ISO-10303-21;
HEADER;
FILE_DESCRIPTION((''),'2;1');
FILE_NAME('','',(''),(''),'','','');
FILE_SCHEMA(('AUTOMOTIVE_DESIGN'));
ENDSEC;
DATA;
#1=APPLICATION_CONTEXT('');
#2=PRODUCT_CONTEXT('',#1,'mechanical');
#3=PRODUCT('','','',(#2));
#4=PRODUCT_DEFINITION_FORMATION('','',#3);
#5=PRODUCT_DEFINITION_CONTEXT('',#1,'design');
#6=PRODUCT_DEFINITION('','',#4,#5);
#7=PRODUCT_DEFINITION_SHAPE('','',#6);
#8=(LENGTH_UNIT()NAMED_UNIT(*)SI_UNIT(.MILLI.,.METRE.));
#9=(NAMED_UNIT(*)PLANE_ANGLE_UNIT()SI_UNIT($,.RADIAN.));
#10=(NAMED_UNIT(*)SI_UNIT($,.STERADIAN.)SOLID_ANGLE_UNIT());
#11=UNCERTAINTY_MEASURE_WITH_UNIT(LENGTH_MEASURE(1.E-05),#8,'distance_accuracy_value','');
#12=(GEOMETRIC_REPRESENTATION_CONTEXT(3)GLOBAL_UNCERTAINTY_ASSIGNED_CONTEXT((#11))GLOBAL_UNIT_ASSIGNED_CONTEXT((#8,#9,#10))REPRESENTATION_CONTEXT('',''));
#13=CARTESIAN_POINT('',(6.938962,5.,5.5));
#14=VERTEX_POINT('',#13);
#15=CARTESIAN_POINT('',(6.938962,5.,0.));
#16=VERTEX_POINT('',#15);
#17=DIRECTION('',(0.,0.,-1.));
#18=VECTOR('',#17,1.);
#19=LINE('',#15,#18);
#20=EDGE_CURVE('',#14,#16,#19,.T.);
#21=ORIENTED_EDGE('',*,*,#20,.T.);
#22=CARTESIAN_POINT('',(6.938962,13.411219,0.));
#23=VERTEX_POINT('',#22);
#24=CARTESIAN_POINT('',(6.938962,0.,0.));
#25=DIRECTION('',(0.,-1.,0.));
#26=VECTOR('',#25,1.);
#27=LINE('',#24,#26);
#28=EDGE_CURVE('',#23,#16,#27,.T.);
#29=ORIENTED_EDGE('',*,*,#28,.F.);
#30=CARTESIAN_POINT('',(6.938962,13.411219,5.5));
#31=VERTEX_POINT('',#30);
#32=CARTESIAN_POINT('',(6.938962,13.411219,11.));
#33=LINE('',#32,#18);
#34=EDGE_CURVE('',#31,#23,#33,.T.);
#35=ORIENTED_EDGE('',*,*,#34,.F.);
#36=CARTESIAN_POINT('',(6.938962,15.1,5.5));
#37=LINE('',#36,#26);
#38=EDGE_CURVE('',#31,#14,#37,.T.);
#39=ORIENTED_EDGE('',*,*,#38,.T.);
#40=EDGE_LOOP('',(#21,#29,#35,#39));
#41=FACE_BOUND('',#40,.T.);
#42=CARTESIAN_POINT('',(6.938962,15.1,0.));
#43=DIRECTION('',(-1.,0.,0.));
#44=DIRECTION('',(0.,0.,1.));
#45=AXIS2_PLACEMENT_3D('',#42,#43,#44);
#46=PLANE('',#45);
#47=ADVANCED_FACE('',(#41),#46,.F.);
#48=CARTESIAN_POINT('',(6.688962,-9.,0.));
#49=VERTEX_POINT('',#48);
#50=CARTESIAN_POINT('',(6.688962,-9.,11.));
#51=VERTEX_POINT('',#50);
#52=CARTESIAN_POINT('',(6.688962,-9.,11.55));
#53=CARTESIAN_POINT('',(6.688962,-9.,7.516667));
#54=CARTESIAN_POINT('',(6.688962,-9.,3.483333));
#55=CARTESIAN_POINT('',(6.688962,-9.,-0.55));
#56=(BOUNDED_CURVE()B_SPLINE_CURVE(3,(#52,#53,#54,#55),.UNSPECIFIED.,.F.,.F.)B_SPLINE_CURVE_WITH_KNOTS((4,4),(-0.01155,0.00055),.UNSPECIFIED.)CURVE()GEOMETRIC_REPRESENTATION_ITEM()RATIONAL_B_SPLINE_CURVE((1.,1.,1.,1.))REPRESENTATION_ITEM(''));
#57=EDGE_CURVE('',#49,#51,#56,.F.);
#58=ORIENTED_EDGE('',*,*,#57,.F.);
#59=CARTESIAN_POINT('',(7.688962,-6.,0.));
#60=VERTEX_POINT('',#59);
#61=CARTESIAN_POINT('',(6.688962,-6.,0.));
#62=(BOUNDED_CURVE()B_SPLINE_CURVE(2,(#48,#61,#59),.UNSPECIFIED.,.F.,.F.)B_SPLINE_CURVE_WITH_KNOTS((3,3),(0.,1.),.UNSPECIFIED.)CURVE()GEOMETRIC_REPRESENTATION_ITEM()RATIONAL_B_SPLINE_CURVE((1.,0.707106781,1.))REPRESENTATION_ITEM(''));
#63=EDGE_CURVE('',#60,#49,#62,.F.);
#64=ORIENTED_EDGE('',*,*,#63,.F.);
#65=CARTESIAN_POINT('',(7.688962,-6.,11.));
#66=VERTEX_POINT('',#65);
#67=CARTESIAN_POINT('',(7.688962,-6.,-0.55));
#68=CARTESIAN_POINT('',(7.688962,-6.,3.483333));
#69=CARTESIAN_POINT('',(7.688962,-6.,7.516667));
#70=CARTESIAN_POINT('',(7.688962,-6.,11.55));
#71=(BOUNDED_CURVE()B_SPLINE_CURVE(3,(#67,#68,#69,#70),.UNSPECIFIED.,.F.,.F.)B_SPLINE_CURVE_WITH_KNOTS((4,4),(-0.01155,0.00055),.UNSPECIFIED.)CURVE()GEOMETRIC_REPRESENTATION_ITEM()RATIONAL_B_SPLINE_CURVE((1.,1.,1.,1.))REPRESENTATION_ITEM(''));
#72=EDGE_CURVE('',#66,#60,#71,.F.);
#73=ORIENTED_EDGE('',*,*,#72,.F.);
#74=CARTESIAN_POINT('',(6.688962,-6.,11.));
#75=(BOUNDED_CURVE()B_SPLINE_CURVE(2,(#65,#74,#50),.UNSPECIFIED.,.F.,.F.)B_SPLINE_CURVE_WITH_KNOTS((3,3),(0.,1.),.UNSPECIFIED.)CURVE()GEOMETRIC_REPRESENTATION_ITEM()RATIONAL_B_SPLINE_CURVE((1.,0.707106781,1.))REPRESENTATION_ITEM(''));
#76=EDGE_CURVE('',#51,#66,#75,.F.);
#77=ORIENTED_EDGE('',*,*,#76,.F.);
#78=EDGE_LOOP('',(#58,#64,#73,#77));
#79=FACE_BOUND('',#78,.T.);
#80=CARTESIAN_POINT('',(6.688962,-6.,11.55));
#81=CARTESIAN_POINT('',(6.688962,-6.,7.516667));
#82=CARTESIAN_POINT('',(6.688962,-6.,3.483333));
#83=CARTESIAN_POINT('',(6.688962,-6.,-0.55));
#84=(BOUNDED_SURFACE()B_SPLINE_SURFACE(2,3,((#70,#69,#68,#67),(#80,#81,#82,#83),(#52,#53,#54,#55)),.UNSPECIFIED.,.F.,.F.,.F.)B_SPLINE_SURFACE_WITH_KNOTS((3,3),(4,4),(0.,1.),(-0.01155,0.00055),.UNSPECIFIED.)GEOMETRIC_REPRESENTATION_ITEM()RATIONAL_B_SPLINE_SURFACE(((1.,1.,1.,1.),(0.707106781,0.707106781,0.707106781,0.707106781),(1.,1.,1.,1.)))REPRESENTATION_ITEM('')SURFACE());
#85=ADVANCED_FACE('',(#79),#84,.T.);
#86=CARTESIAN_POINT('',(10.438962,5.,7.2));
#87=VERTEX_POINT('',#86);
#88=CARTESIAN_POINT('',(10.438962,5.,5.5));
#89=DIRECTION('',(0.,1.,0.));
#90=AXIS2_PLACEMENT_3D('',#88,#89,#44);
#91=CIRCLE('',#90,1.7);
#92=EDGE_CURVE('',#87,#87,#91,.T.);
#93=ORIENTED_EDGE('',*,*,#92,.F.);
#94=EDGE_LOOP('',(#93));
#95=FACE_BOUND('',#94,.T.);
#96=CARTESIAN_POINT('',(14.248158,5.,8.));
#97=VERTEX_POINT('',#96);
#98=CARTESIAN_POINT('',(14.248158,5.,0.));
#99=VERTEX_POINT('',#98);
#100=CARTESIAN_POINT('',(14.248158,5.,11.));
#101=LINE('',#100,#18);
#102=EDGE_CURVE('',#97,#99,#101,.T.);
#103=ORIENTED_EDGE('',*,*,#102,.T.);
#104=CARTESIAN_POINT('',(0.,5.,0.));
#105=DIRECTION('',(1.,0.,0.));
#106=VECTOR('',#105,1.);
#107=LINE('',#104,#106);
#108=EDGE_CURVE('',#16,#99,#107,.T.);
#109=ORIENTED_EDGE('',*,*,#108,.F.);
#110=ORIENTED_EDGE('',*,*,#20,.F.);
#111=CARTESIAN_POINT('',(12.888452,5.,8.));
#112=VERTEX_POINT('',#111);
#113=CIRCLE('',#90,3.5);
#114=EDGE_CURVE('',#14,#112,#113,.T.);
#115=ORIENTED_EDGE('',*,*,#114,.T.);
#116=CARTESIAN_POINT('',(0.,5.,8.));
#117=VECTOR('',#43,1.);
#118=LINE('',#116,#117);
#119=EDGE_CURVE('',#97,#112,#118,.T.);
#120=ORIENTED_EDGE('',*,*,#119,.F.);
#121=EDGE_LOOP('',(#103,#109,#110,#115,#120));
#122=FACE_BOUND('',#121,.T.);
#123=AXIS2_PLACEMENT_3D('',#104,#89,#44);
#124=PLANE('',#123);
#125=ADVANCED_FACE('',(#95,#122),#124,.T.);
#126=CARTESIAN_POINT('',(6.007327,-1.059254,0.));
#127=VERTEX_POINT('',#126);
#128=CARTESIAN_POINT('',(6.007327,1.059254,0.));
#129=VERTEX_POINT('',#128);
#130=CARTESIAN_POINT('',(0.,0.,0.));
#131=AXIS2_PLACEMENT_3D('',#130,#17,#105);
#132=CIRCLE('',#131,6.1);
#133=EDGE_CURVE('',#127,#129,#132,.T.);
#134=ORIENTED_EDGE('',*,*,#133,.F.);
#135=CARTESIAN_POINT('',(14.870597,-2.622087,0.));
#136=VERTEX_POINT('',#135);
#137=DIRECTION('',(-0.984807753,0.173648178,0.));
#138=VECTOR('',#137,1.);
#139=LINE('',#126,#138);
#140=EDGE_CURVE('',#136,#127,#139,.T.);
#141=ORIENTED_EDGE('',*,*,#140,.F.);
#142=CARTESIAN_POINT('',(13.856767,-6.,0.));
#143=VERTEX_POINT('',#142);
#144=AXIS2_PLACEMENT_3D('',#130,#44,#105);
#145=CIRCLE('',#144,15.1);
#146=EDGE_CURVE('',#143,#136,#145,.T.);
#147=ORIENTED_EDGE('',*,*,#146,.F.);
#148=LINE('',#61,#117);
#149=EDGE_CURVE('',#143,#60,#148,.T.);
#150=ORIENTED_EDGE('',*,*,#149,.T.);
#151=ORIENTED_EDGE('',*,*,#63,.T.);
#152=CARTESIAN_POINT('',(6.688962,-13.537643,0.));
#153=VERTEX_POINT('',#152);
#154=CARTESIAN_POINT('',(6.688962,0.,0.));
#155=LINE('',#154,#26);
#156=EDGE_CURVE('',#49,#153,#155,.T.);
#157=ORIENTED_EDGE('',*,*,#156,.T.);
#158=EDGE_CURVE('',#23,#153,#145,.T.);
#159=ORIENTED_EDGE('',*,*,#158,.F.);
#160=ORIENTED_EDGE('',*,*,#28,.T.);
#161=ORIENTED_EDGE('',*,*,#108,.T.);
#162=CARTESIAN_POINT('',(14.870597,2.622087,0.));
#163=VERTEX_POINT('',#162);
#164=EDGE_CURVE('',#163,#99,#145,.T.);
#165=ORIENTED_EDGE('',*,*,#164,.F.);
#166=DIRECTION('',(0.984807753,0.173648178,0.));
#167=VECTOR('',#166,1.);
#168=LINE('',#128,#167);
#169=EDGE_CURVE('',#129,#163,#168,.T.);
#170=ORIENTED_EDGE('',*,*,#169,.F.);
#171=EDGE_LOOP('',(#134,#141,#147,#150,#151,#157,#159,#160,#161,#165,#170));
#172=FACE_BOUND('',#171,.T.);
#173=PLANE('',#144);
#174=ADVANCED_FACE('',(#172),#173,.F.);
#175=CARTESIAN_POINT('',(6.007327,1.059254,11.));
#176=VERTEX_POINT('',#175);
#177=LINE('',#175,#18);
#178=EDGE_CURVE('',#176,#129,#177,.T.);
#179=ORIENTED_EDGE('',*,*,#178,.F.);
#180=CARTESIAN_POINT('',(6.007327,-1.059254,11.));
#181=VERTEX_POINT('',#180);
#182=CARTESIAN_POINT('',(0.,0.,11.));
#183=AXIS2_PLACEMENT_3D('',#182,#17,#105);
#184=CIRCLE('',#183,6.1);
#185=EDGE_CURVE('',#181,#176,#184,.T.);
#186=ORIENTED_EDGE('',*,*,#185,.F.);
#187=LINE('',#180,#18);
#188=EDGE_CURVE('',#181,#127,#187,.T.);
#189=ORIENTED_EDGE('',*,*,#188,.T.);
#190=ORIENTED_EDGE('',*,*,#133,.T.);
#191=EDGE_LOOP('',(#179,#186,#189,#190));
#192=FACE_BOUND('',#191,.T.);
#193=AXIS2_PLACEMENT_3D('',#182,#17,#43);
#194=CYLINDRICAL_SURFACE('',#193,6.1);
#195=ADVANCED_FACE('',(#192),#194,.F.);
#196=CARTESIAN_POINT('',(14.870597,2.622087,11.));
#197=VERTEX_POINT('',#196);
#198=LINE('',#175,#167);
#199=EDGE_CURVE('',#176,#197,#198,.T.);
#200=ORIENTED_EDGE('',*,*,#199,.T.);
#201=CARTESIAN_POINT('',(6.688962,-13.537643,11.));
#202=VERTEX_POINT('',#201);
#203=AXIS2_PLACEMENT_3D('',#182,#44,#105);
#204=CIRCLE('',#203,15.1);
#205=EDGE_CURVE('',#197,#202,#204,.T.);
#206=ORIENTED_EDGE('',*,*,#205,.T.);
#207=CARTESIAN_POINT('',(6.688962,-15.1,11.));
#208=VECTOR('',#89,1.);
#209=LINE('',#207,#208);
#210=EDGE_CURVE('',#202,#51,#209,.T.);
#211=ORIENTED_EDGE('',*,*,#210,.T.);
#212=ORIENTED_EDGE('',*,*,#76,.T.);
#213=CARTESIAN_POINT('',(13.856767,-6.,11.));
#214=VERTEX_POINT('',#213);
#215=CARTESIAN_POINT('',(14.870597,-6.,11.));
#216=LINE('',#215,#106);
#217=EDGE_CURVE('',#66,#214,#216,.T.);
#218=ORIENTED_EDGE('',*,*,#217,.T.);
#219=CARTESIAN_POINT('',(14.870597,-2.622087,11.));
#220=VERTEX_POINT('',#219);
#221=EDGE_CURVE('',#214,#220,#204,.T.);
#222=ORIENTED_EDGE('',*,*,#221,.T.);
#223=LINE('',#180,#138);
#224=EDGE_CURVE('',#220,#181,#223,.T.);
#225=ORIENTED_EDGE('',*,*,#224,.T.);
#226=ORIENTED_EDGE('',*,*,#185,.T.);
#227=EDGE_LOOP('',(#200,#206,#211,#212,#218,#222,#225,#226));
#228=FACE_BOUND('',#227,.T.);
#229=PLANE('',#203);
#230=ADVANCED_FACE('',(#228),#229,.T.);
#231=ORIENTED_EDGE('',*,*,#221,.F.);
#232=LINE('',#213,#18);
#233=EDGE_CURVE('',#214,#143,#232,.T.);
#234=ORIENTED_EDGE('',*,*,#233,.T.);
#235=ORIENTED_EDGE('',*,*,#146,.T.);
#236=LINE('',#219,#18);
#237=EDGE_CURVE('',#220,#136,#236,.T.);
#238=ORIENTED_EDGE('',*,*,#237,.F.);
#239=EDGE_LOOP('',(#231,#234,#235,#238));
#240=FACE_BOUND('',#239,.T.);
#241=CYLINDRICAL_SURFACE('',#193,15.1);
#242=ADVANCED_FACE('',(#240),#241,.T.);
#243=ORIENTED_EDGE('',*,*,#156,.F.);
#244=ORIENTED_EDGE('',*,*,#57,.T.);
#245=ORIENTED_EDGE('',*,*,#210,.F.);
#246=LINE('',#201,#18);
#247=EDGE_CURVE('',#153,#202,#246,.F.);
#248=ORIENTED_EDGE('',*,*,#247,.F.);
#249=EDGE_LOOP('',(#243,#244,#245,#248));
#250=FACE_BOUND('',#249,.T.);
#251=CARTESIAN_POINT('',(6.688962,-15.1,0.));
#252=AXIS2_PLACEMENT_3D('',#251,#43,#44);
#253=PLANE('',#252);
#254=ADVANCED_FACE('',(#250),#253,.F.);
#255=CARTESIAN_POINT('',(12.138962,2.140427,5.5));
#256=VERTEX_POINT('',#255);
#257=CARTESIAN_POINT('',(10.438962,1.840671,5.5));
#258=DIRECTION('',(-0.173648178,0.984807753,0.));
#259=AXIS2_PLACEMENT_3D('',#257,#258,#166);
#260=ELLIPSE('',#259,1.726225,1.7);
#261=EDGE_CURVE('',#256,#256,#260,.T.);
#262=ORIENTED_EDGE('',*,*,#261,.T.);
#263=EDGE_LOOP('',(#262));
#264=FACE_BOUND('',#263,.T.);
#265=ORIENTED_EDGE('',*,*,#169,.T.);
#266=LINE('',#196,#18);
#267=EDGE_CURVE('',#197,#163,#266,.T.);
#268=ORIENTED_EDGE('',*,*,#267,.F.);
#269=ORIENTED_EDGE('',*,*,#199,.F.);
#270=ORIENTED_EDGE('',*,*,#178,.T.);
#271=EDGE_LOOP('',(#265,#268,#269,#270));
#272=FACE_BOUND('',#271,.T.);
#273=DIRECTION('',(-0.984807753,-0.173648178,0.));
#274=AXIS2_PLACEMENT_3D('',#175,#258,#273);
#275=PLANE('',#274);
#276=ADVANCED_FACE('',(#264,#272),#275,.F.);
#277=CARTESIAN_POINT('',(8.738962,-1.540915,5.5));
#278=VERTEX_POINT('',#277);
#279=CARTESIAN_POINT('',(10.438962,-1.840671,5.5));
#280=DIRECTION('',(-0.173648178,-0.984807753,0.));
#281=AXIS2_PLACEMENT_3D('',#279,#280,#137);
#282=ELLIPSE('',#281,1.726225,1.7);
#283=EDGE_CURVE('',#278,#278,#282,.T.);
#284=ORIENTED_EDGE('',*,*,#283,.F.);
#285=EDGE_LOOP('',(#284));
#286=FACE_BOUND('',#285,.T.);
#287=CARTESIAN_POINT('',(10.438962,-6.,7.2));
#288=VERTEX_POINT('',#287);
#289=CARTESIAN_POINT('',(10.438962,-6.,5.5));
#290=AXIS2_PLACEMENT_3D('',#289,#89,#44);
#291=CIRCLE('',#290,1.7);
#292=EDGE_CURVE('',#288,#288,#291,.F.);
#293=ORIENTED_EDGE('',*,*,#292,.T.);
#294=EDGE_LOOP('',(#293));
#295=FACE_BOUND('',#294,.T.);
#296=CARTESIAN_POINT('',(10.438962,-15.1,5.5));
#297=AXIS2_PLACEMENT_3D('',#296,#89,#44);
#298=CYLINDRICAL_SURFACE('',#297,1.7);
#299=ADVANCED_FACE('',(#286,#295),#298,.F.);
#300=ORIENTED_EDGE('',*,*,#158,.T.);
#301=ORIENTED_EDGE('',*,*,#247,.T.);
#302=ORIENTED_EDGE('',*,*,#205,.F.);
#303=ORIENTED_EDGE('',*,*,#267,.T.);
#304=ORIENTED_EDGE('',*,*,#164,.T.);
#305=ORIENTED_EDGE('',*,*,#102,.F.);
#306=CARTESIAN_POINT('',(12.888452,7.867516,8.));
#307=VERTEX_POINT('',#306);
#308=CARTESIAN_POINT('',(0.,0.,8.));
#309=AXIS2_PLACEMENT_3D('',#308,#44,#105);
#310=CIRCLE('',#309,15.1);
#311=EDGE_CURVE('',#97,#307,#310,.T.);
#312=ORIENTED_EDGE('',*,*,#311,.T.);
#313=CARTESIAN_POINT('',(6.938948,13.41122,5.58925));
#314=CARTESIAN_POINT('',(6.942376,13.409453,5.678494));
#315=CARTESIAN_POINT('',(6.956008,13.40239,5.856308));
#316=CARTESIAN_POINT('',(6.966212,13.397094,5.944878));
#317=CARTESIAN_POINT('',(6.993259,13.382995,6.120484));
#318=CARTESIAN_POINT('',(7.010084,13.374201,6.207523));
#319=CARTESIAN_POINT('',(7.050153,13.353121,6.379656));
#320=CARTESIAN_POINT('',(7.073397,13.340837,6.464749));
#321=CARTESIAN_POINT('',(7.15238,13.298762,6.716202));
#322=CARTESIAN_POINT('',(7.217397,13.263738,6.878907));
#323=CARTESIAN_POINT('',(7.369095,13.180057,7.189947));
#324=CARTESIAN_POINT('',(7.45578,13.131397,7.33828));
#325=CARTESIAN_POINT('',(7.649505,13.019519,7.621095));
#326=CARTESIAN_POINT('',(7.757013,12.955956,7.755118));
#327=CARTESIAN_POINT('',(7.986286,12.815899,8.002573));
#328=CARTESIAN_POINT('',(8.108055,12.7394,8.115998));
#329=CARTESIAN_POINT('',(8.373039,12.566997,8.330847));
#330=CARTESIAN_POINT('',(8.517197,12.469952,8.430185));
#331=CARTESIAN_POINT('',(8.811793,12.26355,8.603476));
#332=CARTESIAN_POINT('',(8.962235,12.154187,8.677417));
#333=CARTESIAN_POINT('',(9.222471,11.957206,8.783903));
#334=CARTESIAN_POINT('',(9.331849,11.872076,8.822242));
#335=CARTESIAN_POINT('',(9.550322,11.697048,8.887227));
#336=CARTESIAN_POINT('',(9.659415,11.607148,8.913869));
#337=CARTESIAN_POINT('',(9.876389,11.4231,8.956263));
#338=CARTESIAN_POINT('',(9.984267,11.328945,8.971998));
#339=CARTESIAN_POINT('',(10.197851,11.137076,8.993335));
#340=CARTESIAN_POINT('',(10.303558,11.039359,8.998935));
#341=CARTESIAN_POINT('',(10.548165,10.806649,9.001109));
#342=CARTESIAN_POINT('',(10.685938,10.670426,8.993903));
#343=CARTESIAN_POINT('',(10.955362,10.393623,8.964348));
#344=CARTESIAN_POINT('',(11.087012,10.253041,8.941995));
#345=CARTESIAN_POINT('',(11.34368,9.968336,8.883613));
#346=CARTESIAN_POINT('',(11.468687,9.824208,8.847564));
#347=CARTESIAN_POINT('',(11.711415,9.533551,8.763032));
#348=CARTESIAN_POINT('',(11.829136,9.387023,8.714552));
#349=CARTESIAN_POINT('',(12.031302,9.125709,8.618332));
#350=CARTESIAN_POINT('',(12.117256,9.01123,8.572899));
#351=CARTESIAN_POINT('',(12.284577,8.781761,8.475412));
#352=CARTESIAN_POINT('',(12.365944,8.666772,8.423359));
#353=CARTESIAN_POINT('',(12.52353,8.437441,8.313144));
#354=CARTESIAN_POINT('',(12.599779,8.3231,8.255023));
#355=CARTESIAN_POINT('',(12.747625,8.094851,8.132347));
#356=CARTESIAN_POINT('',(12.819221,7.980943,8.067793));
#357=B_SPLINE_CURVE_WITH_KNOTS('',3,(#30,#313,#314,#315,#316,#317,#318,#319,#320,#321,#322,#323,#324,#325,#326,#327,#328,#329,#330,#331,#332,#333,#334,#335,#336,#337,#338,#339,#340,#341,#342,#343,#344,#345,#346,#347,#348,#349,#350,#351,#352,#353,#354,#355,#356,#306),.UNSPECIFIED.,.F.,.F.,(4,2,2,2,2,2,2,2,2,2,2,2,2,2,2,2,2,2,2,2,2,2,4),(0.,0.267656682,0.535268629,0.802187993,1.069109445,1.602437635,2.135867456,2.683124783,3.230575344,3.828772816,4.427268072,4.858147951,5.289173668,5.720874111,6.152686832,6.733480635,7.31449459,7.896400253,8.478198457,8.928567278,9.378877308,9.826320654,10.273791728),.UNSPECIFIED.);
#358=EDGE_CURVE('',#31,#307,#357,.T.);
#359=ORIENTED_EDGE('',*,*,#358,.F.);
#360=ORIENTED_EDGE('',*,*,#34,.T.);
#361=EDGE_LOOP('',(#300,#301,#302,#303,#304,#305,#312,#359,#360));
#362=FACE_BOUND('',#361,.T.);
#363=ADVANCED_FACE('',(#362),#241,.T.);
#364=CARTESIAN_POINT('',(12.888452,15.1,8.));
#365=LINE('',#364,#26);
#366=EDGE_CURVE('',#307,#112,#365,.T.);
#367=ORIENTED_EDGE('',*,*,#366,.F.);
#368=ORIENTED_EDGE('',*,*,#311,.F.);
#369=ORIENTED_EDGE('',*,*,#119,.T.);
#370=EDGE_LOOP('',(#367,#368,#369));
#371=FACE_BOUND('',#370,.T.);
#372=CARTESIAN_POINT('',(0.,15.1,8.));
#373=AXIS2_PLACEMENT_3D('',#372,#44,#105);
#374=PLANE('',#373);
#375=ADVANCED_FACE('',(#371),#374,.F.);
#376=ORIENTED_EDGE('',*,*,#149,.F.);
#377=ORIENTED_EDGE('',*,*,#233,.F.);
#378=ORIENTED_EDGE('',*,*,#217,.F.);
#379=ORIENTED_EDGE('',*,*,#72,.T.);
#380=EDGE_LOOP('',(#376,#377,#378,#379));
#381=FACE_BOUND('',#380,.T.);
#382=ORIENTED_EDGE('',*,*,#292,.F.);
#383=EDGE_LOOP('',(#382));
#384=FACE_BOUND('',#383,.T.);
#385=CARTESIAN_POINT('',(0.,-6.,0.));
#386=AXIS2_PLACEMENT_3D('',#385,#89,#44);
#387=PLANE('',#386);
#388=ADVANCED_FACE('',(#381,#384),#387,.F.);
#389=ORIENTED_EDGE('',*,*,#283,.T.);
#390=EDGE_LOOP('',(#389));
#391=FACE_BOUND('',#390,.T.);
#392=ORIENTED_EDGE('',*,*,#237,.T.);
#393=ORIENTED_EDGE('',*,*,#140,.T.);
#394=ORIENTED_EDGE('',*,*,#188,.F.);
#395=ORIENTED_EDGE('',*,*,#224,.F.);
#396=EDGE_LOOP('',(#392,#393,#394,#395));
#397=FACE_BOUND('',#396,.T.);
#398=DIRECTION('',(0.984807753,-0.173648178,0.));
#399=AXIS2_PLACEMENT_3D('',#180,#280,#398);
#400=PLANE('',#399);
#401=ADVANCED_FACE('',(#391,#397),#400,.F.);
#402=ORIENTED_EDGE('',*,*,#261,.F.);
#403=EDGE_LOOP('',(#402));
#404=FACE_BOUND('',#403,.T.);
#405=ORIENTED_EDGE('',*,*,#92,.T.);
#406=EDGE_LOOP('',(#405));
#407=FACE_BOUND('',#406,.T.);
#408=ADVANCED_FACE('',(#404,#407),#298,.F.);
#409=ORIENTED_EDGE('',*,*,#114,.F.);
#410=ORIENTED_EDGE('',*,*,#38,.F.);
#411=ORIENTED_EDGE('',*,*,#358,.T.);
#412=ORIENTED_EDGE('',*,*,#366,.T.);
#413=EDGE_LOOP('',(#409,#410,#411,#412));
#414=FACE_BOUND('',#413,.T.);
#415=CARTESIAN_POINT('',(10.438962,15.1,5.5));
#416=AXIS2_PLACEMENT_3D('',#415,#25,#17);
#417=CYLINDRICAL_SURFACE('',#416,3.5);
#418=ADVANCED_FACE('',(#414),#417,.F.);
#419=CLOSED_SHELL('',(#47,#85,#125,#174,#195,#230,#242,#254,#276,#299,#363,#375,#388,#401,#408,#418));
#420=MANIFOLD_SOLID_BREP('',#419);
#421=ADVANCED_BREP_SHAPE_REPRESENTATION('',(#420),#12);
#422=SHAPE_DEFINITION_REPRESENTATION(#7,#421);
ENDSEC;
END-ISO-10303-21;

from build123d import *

# Parameters (mm, degrees)
BOSS_EXTRUDE1_DEPTH     = 11
CUT_EXTRUDE1_DEPTH      = 25.021240601
CUT_EXTRUDE1_DEPTH_BACK = 25.021240601
SKETCH3_R               = 1.7
CUT_EXTRUDE2_START      = 5
SKETCH3_3_R             = 3.5
SKETCH3_3_R_2           = 1.7
CUT_EXTRUDE2_DEPTH      = 20.021240772
CUT_EXTRUDE4_START      = -6
SKETCH4_W               = 8.181634888
SKETCH4_H               = 11
CUT_EXTRUDE4_DEPTH      = 19.021240772
FILLET1_SIZE            = 1
FILLET1_SIZE_2          = 3


with BuildPart() as part:
    # Sketch1 → Boss-Extrude1 (new body)
    with BuildSketch(Plane.XY):
        with BuildLine():
            Line((6.007327293, 1.059253884), (14.87059707, 2.622087483))
            ThreePointArc((14.87059707, 2.622087483), (-15.1, 0), (14.87059707, -2.622087483))
            Line((14.87059707, -2.622087483), (6.007327293, -1.059253884))
            ThreePointArc((6.007327293, -1.059253884), (-6.1, 0), (6.007327293, 1.059253884))
        make_face()
    extrude(amount=BOSS_EXTRUDE1_DEPTH)

    # Sketch3 → Cut-Extrude1 (cut, two sides: drawn at the far end of the back side and taken through both)
    with BuildSketch(Plane(origin=(0, 0, 0), x_dir=(1, 0, 0), z_dir=(0, 1, 0)).offset(-CUT_EXTRUDE1_DEPTH_BACK)):
        with Locations(Location((10.438962182, -5.5, 0), (0, 0, 270))):
            Circle(SKETCH3_R)
    extrude(amount=CUT_EXTRUDE1_DEPTH + CUT_EXTRUDE1_DEPTH_BACK, mode=Mode.SUBTRACT)

    # Sketch3<3> → Cut-Extrude2 (cut, through all)
    # profile 1 of 2: a face of its own
    with BuildSketch(Plane(origin=(0, 0, 0), x_dir=(1, 0, 0), z_dir=(0, 1, 0)).offset(CUT_EXTRUDE2_START)):
        with Locations((10.438962182, -5.5)):
            Circle(SKETCH3_3_R)
        with Locations(Location((10.438962182, -5.5, 0), (0, 0, 270))):
            Circle(SKETCH3_3_R_2, mode=Mode.SUBTRACT)
    # profile 2 of 2: a face of its own
    with BuildSketch(Plane(origin=(0, 0, 0), x_dir=(1, 0, 0), z_dir=(0, 1, 0)).offset(CUT_EXTRUDE2_START)):
        with BuildLine():
            Line((6.938962182, 0), (6.938962182, -5.5))
            ThreePointArc((6.938962182, -5.5), (10.438962182, -2), (13.938962182, -5.5))
            ThreePointArc((13.938962182, -5.5), (13.665664376, -6.855873501), (12.888451925, -8))
            Line((12.888451925, -8), (14.87059707, -8))
            Line((14.87059707, -8), (14.87059707, -5.5))
            Line((14.87059707, -5.5), (14.87059707, 0))
            Line((14.87059707, 0), (6.938962182, 0))
        make_face()
    extrude(amount=CUT_EXTRUDE2_DEPTH, mode=Mode.SUBTRACT)

    # Sketch4 → Cut-Extrude4 (cut, through all)
    with BuildSketch(Plane(origin=(0, 0, 0), x_dir=(1, 0, 0), z_dir=(0, 1, 0)).offset(CUT_EXTRUDE4_START)):
        with Locations((10.779779626, -5.5)):
            Rectangle(SKETCH4_W, SKETCH4_H)
    extrude(amount=-CUT_EXTRUDE4_DEPTH, mode=Mode.SUBTRACT)

    # Fillet1
    # an asymmetric fillet: 3, 1 mm, written as the material it adds along each edge
    with BuildSketch(Plane(origin=(6.688962182, -6, 0), x_dir=(1, 0, 0), z_dir=(0, 0, 1))) as fillet1_piece_1:
        with BuildLine():
            Bezier((FILLET1_SIZE, 0), (0, 0), (0, -FILLET1_SIZE_2), weights=[1, 0.707106781, 1])
            Line((0, -FILLET1_SIZE_2), (0, 0))
            Line((0, 0), (FILLET1_SIZE, 0))
        make_face()
    extrude(amount=11)


solid = part.part
